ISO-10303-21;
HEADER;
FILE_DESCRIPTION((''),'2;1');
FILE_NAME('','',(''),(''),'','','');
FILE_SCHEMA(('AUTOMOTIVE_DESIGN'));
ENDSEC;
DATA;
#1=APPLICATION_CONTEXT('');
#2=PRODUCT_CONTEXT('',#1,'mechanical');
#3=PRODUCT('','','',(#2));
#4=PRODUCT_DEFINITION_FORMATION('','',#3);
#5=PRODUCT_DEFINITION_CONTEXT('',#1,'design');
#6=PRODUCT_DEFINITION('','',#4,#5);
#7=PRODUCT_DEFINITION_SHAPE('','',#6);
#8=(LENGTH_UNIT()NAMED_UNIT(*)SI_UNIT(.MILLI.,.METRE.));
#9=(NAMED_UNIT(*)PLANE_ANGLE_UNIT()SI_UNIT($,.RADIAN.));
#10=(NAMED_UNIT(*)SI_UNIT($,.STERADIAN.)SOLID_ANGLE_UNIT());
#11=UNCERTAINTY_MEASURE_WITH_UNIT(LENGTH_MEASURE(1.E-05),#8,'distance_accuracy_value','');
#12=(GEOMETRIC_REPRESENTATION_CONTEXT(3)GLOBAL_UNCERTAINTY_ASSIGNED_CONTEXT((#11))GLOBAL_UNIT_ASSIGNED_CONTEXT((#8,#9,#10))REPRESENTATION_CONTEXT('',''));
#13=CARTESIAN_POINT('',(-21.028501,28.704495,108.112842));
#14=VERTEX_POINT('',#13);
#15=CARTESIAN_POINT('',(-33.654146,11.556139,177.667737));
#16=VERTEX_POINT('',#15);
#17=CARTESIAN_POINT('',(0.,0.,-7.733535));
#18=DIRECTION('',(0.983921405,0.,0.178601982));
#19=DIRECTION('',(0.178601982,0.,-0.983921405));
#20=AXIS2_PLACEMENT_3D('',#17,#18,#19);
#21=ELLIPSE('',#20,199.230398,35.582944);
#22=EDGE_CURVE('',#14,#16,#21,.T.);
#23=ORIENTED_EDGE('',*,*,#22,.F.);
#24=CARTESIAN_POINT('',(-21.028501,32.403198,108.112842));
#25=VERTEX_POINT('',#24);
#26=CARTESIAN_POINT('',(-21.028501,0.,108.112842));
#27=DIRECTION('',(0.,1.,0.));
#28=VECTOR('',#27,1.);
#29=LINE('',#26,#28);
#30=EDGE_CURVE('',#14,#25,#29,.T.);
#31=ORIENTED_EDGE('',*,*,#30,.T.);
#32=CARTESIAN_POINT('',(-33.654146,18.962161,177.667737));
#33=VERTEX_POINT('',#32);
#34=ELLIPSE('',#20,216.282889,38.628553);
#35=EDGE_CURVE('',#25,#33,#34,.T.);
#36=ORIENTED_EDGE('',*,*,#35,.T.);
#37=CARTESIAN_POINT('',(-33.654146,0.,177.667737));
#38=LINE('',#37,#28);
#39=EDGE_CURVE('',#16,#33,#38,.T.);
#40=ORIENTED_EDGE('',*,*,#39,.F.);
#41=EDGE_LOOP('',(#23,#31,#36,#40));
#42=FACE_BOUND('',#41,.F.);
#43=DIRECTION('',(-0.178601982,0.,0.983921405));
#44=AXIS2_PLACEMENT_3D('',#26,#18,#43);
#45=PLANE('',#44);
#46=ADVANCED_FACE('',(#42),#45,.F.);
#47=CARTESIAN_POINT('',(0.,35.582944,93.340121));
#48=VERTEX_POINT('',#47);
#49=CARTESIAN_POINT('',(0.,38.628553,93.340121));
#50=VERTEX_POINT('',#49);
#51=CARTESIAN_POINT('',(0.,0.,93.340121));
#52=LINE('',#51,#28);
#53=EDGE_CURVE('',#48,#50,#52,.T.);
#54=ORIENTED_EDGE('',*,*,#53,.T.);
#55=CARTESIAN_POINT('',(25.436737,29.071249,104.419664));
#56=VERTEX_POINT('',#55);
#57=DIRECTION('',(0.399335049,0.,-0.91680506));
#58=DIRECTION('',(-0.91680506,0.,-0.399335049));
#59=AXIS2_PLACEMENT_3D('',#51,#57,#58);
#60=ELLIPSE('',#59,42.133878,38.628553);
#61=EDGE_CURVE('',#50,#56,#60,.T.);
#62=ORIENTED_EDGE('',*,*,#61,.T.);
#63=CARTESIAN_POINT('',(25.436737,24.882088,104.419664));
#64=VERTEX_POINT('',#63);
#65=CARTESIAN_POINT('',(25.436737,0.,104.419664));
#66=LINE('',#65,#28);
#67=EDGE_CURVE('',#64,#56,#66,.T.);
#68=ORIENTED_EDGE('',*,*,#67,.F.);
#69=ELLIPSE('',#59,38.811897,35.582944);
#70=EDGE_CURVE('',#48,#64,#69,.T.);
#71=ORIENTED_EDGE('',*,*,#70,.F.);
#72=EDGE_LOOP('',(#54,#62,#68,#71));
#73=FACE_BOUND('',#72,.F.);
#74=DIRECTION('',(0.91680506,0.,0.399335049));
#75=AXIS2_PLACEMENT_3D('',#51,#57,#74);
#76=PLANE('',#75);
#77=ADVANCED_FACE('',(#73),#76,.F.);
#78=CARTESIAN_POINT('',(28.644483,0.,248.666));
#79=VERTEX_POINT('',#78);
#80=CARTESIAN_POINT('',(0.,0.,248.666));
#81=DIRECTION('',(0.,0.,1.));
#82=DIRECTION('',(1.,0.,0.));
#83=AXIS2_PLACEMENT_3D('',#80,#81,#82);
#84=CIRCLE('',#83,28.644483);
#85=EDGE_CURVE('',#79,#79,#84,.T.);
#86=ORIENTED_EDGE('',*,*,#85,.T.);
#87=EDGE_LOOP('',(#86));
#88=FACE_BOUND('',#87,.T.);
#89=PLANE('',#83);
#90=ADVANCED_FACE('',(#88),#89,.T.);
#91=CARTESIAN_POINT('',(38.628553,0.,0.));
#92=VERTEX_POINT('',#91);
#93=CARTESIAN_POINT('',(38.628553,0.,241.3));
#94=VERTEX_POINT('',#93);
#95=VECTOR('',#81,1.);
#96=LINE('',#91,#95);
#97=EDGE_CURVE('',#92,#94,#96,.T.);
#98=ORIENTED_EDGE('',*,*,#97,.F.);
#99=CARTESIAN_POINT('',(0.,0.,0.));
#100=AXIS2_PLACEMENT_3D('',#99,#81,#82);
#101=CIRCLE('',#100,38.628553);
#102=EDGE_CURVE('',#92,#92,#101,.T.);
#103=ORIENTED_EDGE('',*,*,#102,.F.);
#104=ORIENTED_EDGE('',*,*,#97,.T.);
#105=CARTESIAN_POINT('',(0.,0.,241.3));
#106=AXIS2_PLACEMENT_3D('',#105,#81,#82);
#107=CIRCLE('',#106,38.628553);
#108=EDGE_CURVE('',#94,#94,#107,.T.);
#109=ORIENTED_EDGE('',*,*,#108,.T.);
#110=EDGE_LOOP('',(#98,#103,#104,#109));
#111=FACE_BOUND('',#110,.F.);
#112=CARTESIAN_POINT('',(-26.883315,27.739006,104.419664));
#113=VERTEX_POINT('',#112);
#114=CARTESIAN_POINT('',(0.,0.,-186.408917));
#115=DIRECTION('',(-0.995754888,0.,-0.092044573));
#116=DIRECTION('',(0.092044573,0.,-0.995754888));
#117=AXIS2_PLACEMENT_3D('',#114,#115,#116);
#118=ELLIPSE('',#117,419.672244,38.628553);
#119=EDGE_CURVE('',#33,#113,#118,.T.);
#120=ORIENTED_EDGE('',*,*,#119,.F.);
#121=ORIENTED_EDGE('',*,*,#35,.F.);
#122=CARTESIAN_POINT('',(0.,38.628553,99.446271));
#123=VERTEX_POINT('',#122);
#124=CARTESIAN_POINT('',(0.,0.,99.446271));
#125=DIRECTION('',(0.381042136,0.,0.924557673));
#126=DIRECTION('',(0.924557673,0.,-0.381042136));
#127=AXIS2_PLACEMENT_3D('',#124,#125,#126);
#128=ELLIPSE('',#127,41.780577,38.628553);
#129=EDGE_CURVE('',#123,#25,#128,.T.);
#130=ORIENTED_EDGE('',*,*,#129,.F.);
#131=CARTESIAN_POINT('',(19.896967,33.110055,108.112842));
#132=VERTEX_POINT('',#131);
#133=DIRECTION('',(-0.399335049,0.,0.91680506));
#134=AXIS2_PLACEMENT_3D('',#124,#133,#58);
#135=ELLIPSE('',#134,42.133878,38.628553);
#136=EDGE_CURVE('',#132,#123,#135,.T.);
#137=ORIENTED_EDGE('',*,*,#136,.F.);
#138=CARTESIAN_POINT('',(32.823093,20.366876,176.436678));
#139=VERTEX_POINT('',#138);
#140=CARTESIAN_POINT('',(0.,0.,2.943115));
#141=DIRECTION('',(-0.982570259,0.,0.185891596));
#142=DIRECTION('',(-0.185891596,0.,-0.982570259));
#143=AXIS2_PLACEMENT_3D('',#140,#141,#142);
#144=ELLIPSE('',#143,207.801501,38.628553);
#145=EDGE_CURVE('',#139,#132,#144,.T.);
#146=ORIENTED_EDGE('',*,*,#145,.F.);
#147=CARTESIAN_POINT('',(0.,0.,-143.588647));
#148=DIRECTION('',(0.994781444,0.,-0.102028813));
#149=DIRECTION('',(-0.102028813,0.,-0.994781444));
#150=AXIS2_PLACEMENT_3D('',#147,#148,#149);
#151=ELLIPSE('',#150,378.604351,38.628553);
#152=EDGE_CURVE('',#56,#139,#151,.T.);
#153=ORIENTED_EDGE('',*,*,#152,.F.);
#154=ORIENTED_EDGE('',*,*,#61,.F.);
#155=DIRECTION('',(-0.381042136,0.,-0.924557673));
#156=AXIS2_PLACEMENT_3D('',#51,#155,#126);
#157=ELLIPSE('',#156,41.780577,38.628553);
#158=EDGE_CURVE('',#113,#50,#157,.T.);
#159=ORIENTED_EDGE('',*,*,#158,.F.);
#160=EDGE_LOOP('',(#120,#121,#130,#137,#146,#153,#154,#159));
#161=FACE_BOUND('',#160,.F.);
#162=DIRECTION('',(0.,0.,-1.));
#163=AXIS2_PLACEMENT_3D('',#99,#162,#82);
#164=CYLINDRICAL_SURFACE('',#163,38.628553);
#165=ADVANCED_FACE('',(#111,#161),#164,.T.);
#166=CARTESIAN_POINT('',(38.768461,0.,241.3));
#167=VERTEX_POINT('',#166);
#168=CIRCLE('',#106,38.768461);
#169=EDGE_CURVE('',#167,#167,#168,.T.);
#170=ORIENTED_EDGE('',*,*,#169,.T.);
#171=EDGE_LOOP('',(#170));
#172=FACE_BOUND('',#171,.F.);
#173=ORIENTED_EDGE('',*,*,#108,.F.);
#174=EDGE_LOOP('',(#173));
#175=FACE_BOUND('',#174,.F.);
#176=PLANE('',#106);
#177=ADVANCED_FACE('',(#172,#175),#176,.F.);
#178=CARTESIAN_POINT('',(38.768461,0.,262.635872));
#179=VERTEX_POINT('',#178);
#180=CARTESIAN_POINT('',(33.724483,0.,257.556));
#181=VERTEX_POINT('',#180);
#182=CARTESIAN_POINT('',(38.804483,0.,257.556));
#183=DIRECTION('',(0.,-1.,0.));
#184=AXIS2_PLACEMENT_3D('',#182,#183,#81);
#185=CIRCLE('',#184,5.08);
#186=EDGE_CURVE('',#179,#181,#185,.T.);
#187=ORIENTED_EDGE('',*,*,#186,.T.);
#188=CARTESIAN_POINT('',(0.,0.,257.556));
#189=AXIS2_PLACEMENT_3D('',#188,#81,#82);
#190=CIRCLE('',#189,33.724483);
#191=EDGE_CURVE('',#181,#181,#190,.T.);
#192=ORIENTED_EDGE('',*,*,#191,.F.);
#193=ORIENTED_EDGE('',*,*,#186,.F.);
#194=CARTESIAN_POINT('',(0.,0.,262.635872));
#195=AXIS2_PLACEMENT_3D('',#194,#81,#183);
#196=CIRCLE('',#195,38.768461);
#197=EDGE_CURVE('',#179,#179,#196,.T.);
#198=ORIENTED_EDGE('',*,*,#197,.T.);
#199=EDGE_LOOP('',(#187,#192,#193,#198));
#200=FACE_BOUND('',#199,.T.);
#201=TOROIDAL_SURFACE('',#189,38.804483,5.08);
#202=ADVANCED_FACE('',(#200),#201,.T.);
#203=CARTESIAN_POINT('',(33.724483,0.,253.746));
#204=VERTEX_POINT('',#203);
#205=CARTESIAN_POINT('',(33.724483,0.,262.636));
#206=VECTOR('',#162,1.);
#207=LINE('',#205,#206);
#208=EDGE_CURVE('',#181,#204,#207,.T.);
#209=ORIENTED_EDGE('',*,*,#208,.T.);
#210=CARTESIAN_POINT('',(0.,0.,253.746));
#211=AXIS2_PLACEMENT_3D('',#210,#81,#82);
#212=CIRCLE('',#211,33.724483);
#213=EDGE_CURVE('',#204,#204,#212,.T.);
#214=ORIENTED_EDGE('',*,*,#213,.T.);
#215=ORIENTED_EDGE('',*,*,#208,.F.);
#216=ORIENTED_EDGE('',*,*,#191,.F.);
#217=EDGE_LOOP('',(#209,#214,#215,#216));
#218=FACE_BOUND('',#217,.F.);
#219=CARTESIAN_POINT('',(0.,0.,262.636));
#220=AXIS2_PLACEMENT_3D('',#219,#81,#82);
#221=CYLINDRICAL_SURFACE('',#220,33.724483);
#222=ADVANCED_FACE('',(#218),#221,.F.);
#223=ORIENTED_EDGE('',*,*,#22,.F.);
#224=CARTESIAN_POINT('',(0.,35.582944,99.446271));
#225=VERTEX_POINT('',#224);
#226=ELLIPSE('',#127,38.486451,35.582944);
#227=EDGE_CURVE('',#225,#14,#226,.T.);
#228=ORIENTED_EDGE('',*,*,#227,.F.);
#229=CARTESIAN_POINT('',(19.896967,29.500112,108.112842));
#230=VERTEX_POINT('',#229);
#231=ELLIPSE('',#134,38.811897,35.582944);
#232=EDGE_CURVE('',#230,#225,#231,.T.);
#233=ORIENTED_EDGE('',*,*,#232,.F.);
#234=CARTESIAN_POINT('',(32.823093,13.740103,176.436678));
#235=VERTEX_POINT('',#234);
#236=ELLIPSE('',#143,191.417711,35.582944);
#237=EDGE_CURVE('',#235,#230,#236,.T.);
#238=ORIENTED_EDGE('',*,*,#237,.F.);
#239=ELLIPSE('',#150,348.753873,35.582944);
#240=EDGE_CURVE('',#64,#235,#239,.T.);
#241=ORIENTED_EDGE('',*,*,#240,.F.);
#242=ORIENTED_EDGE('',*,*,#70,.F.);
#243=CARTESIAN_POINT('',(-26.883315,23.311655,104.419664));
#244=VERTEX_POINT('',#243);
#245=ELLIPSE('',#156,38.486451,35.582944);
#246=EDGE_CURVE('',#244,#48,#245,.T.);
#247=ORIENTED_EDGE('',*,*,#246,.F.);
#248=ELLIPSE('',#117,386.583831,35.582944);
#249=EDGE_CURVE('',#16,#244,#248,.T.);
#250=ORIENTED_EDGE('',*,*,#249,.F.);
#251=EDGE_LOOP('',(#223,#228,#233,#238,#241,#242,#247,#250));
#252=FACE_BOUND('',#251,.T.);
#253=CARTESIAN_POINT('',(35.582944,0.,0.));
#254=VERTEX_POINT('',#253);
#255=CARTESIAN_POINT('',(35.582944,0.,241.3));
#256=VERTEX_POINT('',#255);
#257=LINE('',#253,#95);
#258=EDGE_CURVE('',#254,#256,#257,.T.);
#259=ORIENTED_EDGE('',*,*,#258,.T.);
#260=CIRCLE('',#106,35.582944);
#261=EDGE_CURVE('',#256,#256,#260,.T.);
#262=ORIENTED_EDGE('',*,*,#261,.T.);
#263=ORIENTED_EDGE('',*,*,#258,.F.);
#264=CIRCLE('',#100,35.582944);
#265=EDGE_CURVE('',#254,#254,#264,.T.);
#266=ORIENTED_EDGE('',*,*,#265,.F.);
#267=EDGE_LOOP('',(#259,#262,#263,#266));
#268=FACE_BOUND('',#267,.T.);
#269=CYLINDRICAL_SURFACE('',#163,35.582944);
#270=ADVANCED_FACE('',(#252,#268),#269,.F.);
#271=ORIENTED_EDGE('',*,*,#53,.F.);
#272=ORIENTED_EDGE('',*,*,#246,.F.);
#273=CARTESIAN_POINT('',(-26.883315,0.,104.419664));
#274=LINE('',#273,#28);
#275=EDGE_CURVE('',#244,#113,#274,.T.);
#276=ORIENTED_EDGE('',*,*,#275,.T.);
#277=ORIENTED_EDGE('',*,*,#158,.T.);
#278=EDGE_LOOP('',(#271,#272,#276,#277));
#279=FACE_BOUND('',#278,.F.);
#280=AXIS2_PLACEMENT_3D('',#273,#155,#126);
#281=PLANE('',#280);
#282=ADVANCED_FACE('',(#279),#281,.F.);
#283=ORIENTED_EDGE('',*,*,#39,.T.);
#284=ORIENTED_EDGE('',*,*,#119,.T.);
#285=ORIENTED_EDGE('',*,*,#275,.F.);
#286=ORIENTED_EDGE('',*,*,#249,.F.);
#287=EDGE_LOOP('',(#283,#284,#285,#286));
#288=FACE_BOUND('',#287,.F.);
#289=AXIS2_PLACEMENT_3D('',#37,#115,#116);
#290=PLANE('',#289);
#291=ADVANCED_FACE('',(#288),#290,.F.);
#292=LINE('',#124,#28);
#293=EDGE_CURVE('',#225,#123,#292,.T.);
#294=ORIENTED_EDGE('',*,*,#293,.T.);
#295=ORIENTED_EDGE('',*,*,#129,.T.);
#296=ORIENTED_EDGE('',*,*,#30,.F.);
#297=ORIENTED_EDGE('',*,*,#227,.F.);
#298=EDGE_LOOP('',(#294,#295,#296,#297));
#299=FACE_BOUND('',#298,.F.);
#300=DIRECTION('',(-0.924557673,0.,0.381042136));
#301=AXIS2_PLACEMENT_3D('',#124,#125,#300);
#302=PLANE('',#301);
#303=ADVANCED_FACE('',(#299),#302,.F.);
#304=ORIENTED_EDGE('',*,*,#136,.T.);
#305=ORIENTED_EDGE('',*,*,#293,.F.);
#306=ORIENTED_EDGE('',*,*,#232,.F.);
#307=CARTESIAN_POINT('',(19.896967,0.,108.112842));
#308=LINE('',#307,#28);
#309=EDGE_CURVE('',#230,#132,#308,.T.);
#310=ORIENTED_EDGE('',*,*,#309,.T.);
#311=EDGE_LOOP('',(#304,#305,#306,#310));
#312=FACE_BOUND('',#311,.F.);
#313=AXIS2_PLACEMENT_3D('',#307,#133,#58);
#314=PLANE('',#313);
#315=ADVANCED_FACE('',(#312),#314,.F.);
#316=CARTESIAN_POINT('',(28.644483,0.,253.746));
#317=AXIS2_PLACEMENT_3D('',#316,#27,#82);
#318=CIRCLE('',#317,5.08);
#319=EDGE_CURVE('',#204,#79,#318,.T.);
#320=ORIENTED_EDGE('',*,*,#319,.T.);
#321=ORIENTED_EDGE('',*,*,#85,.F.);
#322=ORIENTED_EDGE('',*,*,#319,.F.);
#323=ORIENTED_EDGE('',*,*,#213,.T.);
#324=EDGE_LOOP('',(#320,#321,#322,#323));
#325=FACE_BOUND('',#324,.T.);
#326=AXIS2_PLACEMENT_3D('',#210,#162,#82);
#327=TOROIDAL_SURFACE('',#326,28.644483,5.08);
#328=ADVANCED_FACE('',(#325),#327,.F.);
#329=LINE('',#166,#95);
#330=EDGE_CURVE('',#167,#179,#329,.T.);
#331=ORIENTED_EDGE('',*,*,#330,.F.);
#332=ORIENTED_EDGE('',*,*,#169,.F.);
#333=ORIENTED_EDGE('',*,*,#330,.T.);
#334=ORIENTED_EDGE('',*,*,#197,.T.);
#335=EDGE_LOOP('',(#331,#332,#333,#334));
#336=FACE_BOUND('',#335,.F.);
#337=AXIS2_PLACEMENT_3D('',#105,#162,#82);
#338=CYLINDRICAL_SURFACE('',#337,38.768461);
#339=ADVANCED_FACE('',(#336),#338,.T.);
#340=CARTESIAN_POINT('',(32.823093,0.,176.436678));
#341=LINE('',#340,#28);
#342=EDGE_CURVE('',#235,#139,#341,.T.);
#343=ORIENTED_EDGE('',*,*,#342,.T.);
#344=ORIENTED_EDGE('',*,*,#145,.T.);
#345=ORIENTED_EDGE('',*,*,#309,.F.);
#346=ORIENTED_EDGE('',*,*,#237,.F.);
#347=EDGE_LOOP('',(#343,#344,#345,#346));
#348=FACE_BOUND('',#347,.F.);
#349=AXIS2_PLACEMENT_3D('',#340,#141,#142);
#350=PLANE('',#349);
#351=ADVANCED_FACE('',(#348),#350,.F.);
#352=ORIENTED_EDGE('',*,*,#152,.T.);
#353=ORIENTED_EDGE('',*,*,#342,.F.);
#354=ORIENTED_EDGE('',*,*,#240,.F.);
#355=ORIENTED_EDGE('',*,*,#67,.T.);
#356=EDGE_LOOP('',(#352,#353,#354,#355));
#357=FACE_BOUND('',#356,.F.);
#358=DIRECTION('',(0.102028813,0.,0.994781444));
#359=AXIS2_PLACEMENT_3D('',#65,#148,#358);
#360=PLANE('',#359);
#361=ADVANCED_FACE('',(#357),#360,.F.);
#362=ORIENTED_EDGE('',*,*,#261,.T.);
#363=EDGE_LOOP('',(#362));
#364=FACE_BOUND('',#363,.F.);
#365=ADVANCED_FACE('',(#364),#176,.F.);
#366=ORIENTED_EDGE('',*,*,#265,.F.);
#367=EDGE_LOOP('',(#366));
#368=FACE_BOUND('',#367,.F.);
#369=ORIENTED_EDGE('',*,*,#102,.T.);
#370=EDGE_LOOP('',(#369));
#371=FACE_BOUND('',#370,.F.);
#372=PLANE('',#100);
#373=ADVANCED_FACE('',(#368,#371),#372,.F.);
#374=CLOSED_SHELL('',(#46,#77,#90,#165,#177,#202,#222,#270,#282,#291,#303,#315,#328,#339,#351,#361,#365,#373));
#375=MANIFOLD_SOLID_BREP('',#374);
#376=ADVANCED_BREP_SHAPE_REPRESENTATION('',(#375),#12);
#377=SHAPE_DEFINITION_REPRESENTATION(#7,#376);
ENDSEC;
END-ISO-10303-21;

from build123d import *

# Parameters (mm, degrees)
F0_R     = 38.628552608
F0_R_2   = 35.5829437887
F1_DEPTH = 241.3
F2_R     = 38.7684611147
F3_DEPTH = 21.336
F4_R     = 33.724483213
F5_DEPTH = 13.97
F8_DEPTH = 59.944


# Not quite as in the source:
# - a fillet or chamfer that OpenCascade refuses, or shapes differently, is made with other operations: its cross-section is extruded or revolved along the edge and cut away or added


with BuildPart() as f1:
    # F0 (on Top) → F1 (new body)
    with BuildSketch(Plane.XY):
        Circle(F0_R)
        Circle(F0_R_2, mode=Mode.SUBTRACT)
    extrude(amount=F1_DEPTH)

    # F2 (on face) → F3 (join)
    with BuildSketch(Plane.XY.offset(241.3)):
        Circle(F2_R)
    extrude(amount=F3_DEPTH)

    # F4 (on face) → F5 (cut)
    with BuildSketch(Plane.XY.offset(262.636)):
        Circle(F4_R)
    extrude(amount=-F5_DEPTH, mode=Mode.SUBTRACT)

    # F6: fillet of radius 5.08 on 3 edges, made by hand

    # F6_s1 → F6_t2 (revolve)
    with BuildSketch(Plane.XZ):
        with BuildLine():
            ThreePointArc((33.724483213, 253.746), (32.2365856615, 250.1538975516), (28.644483213, 248.666))
            Line((28.644483213, 248.666), (33.724483213, 248.666))
            Line((33.724483213, 248.666), (33.724483213, 253.746))
        make_face()
    revolve(axis=Axis((0, 0, 248.666), (0, 0, 1)))

    # F6_s3 → F6_t4 (revolve, cut)
    with BuildSketch(Plane.XZ):
        with BuildLine():
            ThreePointArc((38.804483213, 262.636), (35.2123807646, 261.1481024484), (33.724483213, 257.556))
            Line((33.724483213, 257.556), (33.724483213, 262.636))
            Line((33.724483213, 262.636), (38.804483213, 262.636))
        make_face()
    revolve(axis=Axis((0, 0, 262.636), (0, 0, 1)), mode=Mode.SUBTRACT)

    # F7 (on Front) → F8 (cut)
    with BuildSketch(Plane.XZ):
        Polygon((-21.0285011722, 108.1128418446), (-33.6541458964, 177.6677370071), (-26.883315295, 104.4196635485), (0, 93.3401212096), (25.4367366433, 104.4196635485), (32.8230932355, 176.4366775751), (19.8969673365, 108.1128418446), (0, 99.4462705343), align=None)
    extrude(amount=-F8_DEPTH, mode=Mode.SUBTRACT)


solid = f1.part
